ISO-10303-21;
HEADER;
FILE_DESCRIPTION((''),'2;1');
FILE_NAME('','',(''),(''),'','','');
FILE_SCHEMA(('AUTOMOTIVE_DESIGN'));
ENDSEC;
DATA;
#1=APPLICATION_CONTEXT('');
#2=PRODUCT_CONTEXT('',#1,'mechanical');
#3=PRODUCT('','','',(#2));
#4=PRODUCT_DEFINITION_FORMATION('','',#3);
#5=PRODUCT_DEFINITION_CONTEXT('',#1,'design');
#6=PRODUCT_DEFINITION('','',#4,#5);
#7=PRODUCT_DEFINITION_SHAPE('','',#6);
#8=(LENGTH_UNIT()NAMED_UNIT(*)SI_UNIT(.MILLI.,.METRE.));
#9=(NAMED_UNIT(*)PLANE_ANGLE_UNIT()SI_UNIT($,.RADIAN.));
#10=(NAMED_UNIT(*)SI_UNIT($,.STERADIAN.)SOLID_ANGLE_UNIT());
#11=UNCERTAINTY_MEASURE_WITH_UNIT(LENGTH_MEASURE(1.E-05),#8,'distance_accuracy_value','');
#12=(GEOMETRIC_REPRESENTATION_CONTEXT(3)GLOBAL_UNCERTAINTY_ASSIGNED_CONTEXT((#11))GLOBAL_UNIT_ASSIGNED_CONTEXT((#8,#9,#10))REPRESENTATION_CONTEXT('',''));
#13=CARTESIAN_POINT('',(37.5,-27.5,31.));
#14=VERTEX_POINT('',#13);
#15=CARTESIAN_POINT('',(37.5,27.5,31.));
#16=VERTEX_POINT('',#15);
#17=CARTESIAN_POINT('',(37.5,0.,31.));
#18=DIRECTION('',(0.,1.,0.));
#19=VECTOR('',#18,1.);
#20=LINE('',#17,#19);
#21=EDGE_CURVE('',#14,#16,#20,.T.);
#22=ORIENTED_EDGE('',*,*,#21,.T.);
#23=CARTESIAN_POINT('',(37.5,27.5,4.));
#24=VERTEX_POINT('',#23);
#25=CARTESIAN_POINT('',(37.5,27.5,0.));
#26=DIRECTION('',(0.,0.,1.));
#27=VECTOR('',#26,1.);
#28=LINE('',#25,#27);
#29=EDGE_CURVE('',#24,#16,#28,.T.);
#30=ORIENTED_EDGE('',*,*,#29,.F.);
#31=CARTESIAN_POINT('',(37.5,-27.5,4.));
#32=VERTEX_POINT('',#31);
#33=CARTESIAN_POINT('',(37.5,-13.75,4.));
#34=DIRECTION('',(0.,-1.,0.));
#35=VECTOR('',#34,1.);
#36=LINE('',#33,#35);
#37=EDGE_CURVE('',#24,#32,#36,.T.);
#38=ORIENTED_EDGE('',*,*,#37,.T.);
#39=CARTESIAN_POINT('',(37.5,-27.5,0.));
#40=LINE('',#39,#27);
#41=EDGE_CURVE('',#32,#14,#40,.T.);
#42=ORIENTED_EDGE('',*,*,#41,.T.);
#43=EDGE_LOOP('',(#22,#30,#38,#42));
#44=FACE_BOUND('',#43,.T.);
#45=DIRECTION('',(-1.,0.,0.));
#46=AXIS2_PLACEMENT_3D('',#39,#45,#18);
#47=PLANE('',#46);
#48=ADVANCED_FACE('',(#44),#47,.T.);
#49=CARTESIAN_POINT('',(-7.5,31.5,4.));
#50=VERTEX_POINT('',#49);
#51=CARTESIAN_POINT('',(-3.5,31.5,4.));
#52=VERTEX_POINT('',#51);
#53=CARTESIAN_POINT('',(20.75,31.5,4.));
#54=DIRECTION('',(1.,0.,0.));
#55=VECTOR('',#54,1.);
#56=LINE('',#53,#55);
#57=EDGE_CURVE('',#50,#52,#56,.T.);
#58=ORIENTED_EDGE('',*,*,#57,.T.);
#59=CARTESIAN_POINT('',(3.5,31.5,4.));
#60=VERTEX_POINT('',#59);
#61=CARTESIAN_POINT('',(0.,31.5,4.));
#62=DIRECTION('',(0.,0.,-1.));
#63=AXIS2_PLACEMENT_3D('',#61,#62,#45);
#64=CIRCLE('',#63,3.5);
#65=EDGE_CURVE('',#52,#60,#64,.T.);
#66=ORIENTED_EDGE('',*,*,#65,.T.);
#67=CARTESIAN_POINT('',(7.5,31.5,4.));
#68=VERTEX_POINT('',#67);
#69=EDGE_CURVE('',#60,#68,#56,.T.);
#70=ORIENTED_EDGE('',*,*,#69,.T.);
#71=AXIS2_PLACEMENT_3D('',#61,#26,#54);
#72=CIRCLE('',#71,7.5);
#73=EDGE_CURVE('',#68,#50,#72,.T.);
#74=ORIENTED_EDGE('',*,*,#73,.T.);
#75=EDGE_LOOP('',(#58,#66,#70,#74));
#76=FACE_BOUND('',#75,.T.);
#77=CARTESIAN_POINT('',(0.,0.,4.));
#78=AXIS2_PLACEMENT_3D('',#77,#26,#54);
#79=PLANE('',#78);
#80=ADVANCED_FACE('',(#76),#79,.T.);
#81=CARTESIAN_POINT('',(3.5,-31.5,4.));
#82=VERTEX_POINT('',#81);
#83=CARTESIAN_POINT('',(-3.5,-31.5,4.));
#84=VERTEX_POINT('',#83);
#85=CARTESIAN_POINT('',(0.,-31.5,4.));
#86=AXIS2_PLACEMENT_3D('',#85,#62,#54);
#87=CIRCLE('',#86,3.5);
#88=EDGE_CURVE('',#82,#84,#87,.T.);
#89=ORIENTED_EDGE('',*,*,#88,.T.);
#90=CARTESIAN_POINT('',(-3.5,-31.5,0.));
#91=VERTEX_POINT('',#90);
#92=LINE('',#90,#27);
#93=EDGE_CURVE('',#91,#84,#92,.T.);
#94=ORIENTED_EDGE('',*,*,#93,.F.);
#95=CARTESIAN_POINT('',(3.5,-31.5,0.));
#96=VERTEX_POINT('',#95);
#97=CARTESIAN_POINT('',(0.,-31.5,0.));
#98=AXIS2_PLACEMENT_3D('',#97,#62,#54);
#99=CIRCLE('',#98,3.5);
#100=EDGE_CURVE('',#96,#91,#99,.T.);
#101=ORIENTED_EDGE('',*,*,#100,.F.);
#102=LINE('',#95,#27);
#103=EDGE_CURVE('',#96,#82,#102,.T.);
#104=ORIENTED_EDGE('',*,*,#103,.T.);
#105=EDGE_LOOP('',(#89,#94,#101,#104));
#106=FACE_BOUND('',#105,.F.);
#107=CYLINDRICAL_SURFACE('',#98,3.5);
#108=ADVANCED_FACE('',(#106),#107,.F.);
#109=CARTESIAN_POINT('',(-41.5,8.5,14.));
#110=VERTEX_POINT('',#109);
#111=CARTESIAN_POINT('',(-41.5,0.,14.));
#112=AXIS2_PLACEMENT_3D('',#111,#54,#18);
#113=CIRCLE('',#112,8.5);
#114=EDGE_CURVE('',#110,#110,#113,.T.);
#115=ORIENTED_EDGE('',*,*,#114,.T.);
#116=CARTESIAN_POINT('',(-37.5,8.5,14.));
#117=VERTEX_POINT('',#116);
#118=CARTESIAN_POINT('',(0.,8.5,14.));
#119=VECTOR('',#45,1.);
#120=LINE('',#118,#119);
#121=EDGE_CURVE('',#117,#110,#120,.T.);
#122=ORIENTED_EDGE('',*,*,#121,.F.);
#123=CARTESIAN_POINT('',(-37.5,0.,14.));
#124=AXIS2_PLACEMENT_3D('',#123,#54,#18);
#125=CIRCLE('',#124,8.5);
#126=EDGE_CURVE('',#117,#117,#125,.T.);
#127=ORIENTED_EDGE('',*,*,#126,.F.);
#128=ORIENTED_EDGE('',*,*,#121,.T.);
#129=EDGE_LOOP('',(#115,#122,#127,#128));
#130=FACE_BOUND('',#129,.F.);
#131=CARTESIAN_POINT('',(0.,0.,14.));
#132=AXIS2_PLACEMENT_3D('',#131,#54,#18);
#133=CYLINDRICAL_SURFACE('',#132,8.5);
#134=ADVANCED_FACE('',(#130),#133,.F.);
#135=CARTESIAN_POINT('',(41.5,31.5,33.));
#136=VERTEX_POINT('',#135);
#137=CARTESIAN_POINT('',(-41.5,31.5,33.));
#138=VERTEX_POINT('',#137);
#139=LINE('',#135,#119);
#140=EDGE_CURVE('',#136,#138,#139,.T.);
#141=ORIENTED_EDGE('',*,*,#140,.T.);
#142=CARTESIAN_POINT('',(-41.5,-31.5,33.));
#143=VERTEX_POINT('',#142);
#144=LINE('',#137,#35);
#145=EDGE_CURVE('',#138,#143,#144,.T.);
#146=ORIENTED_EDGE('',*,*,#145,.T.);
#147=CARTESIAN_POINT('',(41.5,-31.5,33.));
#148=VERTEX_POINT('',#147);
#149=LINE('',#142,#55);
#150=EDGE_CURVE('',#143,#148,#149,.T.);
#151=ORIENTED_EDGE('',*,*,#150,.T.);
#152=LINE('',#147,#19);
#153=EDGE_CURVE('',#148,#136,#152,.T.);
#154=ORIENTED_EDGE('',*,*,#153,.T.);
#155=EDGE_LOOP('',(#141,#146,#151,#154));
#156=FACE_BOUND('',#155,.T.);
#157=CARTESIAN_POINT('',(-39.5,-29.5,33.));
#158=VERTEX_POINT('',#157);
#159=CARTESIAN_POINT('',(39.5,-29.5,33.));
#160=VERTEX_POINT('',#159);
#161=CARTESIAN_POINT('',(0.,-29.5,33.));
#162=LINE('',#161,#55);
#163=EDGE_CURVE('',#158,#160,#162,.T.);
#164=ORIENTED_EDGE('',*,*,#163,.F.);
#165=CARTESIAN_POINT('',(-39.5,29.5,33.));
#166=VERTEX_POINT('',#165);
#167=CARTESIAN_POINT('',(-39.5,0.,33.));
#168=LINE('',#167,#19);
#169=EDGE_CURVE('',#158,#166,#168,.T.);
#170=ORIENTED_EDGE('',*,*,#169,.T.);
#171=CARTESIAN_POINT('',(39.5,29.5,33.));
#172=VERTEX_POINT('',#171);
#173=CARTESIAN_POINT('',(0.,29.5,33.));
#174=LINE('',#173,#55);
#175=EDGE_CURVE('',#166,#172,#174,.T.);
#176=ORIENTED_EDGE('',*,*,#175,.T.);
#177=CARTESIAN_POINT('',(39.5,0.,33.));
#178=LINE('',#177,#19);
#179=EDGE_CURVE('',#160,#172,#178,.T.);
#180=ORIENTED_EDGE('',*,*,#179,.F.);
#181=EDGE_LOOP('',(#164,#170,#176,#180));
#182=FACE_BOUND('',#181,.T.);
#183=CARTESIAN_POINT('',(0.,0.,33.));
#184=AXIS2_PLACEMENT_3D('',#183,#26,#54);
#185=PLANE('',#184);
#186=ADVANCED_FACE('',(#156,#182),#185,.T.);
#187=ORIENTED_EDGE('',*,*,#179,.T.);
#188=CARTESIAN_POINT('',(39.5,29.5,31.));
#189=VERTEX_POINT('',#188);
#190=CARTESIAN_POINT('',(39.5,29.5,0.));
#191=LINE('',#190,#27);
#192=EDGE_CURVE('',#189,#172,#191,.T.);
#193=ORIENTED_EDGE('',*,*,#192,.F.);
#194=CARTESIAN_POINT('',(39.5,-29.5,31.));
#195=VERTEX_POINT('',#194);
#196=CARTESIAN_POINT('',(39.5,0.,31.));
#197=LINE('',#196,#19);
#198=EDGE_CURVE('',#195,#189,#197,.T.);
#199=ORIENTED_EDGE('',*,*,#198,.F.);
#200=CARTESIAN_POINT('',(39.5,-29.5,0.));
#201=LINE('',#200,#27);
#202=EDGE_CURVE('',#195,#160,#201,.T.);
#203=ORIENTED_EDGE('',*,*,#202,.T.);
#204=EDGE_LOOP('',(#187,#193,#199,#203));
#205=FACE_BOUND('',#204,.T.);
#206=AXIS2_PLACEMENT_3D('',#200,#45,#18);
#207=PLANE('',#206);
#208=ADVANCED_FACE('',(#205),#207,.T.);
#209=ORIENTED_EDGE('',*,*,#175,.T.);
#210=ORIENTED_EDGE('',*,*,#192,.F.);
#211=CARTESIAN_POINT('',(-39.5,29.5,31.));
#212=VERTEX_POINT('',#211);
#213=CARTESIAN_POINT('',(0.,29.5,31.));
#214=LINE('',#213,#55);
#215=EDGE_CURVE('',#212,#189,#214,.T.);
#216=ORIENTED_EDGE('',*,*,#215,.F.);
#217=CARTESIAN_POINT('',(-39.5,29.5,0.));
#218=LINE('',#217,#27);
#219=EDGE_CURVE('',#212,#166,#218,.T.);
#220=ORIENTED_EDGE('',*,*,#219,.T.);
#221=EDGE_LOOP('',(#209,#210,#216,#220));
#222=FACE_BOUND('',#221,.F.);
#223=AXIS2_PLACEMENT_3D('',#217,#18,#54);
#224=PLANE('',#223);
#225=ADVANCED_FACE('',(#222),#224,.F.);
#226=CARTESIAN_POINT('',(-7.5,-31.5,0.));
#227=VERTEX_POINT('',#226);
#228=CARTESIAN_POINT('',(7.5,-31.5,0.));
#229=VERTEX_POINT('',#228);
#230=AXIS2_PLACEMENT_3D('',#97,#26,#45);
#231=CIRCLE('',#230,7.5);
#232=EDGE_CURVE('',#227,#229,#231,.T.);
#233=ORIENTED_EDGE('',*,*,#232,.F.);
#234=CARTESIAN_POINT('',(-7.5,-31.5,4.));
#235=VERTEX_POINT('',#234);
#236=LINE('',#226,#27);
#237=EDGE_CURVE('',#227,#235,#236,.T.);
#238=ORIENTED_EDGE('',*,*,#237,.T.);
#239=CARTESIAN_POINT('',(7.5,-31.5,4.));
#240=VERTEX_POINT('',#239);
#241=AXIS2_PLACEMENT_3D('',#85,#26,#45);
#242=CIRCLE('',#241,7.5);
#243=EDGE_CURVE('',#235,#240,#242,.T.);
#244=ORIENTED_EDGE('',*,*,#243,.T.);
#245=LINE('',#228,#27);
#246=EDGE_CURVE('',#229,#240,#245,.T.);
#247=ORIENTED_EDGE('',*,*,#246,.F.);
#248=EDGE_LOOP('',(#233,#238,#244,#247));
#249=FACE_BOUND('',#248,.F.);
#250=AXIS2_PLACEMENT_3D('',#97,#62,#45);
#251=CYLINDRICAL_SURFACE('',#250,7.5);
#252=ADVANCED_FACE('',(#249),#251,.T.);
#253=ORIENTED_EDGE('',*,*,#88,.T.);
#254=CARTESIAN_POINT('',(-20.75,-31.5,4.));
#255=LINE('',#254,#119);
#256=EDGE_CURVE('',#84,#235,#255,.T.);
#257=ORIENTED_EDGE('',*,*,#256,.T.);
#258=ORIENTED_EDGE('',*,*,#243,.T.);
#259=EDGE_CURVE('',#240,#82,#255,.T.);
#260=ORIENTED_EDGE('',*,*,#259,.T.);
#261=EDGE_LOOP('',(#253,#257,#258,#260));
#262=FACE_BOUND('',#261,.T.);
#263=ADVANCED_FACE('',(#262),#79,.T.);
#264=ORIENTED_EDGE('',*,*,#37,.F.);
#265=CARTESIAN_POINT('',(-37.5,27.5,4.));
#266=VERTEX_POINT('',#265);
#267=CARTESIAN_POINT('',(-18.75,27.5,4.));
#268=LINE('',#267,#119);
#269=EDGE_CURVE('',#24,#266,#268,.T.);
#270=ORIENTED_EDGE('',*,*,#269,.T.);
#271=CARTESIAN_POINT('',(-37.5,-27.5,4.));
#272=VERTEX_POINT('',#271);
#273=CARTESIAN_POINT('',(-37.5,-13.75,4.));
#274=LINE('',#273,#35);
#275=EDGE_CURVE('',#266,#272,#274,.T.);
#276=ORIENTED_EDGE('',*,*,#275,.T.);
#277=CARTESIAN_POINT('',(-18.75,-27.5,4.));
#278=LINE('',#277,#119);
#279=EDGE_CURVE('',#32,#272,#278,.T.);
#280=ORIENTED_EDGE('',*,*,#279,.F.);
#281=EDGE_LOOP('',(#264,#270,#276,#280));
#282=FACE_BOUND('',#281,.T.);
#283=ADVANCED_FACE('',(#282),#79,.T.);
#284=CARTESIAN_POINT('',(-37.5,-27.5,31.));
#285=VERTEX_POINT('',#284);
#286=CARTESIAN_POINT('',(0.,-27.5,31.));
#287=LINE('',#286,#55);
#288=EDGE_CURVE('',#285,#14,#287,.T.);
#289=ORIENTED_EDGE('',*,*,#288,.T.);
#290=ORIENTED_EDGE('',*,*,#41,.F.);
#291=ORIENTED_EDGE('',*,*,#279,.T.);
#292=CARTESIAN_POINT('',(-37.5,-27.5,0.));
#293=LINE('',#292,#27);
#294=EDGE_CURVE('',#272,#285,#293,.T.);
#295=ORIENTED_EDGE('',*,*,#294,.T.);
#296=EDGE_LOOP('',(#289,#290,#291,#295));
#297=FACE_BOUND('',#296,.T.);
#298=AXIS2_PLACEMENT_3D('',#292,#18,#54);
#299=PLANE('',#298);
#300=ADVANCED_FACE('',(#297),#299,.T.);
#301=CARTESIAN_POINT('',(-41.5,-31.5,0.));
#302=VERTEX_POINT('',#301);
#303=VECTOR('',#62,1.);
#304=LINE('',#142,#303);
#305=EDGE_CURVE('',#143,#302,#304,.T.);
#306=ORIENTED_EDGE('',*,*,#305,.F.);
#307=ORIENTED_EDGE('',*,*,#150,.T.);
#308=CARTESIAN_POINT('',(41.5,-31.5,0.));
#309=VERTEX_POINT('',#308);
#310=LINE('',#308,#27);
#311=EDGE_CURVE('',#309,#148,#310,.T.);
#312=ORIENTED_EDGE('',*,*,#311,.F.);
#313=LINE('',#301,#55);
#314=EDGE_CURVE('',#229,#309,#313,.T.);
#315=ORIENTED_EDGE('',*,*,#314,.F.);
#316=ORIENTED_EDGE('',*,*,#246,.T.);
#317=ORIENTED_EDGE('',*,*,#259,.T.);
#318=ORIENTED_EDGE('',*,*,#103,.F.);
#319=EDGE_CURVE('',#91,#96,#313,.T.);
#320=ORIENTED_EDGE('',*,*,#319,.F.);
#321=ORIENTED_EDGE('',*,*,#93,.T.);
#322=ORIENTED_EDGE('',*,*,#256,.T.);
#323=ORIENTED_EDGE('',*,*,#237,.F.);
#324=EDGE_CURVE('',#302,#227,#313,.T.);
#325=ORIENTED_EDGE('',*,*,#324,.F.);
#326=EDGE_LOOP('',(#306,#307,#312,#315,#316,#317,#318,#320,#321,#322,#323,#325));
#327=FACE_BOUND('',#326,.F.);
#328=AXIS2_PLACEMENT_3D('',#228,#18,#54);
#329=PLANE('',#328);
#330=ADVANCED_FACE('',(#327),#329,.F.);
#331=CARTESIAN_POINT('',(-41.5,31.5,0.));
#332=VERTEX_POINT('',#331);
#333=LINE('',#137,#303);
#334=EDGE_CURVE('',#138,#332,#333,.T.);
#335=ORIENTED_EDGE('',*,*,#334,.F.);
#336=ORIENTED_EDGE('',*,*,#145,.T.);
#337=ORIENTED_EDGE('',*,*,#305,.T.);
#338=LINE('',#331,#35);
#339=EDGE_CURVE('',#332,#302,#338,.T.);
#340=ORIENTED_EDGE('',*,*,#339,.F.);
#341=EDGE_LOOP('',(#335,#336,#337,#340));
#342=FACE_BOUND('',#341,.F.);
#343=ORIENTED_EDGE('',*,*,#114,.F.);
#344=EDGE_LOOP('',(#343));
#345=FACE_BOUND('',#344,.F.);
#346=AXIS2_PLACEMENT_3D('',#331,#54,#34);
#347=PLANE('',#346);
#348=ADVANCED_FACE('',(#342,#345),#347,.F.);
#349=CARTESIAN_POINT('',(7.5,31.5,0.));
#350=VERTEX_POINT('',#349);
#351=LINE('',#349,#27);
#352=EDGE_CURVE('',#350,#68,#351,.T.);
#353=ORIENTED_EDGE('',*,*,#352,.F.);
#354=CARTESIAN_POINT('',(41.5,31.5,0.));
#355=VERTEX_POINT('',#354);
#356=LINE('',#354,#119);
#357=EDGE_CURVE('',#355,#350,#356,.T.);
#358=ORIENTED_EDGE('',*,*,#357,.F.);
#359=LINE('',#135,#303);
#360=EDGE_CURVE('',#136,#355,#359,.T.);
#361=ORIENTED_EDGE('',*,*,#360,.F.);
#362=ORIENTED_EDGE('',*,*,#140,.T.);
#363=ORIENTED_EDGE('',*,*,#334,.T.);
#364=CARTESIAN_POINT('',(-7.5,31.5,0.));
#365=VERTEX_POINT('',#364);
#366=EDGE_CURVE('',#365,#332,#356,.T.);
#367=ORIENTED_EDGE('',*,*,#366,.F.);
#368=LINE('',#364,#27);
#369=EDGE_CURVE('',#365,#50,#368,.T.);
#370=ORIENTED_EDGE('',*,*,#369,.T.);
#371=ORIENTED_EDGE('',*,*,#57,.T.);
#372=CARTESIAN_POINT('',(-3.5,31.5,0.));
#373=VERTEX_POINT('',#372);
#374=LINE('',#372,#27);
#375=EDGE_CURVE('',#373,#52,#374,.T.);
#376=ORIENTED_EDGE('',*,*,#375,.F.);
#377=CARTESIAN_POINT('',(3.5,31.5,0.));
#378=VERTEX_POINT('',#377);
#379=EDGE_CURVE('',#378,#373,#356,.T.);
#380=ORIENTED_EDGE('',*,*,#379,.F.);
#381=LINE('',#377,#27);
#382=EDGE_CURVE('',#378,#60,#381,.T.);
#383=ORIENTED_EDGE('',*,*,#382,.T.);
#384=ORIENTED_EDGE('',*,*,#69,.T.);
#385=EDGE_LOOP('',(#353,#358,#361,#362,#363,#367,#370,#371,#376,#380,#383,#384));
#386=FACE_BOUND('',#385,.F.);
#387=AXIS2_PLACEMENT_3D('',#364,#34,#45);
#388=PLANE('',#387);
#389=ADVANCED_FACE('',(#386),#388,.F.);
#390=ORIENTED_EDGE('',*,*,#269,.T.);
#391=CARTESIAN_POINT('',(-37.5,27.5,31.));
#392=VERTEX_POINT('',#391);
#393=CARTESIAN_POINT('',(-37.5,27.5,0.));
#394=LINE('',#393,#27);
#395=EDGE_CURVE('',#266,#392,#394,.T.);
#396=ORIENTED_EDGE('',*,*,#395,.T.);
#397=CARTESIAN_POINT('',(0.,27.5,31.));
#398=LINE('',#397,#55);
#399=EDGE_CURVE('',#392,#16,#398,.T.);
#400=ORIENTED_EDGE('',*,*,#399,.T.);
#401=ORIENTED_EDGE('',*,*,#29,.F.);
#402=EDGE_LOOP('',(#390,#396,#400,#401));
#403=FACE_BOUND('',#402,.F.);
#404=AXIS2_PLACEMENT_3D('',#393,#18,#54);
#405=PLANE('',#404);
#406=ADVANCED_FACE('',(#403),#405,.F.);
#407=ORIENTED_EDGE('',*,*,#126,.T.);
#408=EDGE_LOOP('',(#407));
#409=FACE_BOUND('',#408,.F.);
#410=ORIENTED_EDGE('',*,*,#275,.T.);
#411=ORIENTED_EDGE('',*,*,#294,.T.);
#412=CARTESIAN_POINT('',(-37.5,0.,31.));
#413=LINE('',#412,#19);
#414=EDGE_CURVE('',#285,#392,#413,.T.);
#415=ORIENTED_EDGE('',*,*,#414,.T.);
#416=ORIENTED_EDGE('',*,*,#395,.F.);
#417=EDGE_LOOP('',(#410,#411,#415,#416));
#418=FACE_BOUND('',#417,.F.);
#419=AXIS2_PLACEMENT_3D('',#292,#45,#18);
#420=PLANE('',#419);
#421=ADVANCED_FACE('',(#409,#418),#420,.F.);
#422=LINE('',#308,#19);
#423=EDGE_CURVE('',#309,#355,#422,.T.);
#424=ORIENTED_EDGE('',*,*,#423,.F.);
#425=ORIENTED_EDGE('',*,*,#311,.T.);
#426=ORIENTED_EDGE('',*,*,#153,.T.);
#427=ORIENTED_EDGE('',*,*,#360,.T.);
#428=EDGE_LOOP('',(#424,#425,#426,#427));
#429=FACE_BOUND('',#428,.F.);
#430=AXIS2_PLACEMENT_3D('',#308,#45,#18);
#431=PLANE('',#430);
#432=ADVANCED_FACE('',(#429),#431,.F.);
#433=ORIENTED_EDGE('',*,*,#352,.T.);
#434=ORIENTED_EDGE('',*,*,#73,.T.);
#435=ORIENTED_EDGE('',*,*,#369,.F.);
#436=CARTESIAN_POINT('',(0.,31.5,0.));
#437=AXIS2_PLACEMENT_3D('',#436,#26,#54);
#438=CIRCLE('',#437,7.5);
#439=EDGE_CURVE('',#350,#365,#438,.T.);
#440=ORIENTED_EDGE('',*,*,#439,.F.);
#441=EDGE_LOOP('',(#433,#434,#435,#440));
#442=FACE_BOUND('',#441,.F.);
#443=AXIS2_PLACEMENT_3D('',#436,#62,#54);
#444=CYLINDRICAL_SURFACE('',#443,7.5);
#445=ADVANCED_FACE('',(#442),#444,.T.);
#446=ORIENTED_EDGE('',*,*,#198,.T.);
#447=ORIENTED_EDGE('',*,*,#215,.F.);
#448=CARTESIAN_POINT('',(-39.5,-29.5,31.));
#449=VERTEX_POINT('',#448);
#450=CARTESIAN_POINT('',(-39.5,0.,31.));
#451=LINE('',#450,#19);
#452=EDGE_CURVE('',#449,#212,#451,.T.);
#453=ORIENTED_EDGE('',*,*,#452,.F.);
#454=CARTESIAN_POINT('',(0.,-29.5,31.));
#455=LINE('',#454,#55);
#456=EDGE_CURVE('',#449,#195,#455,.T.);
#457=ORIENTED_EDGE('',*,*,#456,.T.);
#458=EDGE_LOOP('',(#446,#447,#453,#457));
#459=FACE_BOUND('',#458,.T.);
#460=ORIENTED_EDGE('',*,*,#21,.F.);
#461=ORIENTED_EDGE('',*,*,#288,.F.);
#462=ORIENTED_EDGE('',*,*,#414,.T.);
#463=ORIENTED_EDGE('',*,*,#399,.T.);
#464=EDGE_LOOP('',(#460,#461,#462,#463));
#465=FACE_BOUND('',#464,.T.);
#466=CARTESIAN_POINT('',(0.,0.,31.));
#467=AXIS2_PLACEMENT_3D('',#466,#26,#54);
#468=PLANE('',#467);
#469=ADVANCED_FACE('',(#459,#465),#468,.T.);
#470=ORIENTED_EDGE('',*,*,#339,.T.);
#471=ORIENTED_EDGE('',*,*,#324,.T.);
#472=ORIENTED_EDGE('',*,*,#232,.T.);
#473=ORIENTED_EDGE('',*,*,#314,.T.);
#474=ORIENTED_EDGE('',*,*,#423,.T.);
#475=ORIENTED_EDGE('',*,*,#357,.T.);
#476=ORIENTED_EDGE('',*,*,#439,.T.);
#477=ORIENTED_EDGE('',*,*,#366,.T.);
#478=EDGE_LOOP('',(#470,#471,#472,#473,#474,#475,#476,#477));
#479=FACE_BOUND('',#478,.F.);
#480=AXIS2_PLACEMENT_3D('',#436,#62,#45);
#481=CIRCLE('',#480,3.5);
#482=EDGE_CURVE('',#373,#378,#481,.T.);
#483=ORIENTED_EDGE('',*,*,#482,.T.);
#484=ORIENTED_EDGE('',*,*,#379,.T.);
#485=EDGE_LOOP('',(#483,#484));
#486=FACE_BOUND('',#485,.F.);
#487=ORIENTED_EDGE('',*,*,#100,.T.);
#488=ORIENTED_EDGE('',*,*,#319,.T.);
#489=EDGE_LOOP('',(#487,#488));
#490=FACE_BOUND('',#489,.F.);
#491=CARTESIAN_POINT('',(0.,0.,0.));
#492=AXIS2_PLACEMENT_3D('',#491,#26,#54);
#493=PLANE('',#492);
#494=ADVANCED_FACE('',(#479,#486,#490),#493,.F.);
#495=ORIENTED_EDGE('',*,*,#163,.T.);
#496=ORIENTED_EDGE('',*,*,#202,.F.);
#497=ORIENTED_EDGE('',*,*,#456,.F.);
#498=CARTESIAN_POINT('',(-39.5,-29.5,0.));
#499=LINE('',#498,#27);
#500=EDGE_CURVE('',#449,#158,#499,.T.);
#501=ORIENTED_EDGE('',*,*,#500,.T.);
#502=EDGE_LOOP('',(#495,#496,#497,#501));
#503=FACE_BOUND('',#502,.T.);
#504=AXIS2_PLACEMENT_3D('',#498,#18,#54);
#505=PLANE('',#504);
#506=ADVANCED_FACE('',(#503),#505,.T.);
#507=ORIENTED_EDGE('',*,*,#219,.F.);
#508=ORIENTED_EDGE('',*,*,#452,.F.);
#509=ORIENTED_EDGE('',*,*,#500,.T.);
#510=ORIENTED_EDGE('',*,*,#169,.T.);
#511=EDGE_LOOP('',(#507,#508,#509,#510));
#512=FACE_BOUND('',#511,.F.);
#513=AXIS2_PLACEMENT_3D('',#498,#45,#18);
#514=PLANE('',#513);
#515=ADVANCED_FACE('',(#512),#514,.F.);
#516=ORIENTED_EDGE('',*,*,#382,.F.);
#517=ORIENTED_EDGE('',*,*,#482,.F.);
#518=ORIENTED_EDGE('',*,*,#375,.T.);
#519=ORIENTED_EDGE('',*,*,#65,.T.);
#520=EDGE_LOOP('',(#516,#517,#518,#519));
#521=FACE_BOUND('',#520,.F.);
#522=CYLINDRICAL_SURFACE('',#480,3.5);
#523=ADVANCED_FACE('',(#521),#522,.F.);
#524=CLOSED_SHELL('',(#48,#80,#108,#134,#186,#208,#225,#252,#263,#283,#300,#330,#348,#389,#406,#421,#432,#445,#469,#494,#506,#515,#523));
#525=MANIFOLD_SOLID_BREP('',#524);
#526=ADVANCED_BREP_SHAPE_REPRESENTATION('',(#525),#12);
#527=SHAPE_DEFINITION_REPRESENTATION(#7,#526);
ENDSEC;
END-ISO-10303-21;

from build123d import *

# Parameters (mm, degrees)
F0_W     = 79
F0_H     = 59
F0_W_2   = 75
F0_H_2   = 55
F1_DEPTH = 4
F2_DEPTH = 31
F3_DEPTH = 33
F4_R     = 8.5
F5_DEPTH = 41.501


# Not quite as in the source:
# - a feature names something its author has since deleted; it is built from what else it names


with BuildPart() as f1:
    # F0 (on Top) → F1 (new body)
    with BuildSketch(Plane.XY):
        Polygon((41.5, -31.5), (41.5, 31.5), (7.5, 31.5), (3.5, 31.5), (-3.5, 31.5), (-7.5, 31.5), (-41.5, 31.5), (-41.5, -31.5), (-7.5, -31.5), (-3.5, -31.5), (3.5, -31.5), (7.5, -31.5), align=None)
        Rectangle(F0_W, F0_H, mode=Mode.SUBTRACT)
        Rectangle(F0_W, F0_H)
        Rectangle(F0_W_2, F0_H_2, mode=Mode.SUBTRACT)
        Rectangle(F0_W_2, F0_H_2)
        with BuildLine():
            ThreePointArc((-7.5, -31.5), (0, -39), (7.5, -31.5))
            Line((7.5, -31.5), (3.5, -31.5))
            ThreePointArc((3.5, -31.5), (0, -35), (-3.5, -31.5))
            Line((-3.5, -31.5), (-7.5, -31.5))
        make_face()
        with BuildLine():
            Line((3.5, 31.5), (7.5, 31.5))
            ThreePointArc((7.5, 31.5), (0, 39), (-7.5, 31.5))
            Line((-7.5, 31.5), (-3.5, 31.5))
            ThreePointArc((-3.5, 31.5), (0, 35), (3.5, 31.5))
        make_face()
    extrude(amount=F1_DEPTH)

    # F0 (on Top) → F2 (join)
    with BuildSketch(Plane.XY):
        Rectangle(F0_W, F0_H)
        Rectangle(F0_W_2, F0_H_2, mode=Mode.SUBTRACT)
    extrude(amount=F2_DEPTH)

    # F0 (on Top) → F3 (join)
    with BuildSketch(Plane.XY):
        Polygon((41.5, -31.5), (41.5, 31.5), (7.5, 31.5), (3.5, 31.5), (-3.5, 31.5), (-7.5, 31.5), (-41.5, 31.5), (-41.5, -31.5), (-7.5, -31.5), (-3.5, -31.5), (3.5, -31.5), (7.5, -31.5), align=None)
        Rectangle(F0_W, F0_H, mode=Mode.SUBTRACT)
    extrude(amount=F3_DEPTH)

    # F4 (on Right) → F5 (cut, through all)
    with BuildSketch(Plane.YZ):
        with Locations((0, 14)):
            Circle(F4_R)
    extrude(amount=-F5_DEPTH, mode=Mode.SUBTRACT)


solid = f1.part
